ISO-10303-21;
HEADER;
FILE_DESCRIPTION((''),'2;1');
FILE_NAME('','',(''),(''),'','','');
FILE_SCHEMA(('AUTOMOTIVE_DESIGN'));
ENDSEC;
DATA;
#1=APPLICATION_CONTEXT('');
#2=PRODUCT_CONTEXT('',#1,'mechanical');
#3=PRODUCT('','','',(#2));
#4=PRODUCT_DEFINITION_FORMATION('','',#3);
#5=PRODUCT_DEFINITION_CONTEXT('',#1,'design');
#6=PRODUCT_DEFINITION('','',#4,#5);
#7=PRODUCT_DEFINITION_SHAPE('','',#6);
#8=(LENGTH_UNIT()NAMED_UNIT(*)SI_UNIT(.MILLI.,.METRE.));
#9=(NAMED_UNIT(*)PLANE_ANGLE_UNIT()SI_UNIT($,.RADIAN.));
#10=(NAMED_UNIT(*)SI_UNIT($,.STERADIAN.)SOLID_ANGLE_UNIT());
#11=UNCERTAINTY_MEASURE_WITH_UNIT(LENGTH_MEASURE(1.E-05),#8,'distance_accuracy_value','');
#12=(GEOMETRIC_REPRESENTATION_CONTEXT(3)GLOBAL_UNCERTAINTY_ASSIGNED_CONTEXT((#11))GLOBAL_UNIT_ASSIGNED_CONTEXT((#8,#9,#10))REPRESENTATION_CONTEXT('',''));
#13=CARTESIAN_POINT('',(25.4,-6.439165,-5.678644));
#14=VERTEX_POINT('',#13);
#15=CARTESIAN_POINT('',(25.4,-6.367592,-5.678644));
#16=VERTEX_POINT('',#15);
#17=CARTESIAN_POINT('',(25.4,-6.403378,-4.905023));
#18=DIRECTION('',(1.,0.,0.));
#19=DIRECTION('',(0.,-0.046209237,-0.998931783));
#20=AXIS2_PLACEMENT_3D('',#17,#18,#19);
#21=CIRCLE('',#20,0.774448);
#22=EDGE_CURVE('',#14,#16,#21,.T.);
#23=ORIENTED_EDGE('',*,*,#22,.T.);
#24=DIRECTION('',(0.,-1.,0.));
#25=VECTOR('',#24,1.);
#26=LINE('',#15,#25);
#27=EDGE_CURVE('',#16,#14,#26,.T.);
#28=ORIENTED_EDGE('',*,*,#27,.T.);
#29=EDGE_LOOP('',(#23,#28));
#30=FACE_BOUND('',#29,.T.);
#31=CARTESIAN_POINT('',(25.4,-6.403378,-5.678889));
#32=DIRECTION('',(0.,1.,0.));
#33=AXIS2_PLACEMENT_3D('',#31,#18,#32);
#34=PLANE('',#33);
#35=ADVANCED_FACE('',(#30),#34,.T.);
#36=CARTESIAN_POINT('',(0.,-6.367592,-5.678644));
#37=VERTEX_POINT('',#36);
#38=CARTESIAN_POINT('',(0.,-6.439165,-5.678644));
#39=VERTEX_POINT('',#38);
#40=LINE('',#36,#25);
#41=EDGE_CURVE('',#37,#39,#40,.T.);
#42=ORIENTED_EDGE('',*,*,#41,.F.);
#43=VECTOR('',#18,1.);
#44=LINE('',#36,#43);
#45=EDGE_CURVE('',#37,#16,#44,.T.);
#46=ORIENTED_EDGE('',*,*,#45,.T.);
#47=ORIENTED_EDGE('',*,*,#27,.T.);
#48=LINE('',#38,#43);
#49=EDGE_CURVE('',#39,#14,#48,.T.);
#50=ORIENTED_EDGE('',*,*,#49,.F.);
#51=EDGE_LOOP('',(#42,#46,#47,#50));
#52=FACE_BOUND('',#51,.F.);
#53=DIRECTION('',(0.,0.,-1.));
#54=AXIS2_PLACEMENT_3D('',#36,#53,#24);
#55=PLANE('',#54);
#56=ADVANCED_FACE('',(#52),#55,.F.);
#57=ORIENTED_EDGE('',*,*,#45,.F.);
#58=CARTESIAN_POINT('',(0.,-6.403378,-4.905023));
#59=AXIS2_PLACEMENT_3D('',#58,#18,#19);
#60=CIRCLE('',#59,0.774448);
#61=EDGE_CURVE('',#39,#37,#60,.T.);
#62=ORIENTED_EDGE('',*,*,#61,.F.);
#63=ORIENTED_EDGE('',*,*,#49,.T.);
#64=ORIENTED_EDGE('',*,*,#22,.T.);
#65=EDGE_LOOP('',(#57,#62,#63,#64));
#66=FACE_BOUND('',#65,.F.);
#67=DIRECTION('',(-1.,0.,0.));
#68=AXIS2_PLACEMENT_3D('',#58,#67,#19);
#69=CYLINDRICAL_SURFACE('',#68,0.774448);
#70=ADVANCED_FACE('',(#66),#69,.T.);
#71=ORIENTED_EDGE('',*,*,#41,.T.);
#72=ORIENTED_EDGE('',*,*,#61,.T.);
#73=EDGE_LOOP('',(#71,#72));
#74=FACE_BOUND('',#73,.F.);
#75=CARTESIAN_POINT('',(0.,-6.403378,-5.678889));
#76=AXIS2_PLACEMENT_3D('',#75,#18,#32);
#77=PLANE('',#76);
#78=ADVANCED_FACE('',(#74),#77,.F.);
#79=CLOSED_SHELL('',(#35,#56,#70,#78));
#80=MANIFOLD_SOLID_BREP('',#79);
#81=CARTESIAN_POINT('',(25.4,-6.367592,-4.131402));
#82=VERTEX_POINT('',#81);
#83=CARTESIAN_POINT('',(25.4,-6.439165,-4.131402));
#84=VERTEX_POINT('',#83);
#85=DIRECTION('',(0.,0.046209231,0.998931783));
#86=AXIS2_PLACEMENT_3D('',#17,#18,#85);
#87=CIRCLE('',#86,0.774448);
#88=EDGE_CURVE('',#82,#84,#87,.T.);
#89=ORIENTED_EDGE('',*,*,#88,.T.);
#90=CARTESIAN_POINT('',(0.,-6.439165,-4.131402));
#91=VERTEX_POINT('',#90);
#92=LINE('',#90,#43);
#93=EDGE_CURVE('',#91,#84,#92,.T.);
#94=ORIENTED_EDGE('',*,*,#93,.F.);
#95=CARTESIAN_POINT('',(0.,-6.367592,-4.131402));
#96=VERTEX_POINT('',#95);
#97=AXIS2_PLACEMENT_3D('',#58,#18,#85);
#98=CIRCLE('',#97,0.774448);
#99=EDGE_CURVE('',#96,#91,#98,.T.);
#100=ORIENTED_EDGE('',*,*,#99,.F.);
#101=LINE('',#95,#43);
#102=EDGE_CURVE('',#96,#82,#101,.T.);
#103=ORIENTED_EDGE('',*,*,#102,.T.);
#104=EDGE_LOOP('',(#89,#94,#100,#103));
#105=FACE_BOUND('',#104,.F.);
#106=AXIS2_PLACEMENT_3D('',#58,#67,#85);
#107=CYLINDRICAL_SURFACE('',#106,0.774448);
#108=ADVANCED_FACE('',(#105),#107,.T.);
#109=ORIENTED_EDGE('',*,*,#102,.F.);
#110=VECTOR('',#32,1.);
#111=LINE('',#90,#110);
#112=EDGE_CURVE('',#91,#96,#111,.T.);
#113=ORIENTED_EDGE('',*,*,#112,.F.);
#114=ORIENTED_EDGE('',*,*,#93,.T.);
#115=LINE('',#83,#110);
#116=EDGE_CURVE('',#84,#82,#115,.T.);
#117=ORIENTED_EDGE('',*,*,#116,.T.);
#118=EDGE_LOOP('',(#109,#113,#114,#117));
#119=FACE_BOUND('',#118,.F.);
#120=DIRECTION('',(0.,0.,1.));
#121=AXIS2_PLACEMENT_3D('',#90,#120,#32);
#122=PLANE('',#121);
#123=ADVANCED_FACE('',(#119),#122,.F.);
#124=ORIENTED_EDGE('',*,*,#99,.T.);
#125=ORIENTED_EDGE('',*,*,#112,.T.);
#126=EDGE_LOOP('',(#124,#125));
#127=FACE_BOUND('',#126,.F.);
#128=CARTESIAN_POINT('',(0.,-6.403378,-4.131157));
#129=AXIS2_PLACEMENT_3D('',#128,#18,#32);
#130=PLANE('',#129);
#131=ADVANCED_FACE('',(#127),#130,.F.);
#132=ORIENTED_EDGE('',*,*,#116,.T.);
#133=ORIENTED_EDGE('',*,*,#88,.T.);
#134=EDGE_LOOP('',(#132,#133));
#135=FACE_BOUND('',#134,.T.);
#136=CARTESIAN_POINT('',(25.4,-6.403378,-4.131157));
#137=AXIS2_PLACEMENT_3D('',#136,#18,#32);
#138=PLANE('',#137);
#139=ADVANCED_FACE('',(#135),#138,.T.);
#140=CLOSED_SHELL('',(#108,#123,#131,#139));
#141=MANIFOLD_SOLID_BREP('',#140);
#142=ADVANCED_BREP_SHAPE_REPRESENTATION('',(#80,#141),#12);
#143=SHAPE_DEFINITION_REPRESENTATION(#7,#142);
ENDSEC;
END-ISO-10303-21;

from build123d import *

# Parameters (mm, degrees)
F1_DEPTH = 25.4


with BuildPart() as f1:
    # F0 (on Right) → F1 (new body)
    with BuildSketch(Plane.YZ):
        with BuildLine():
            ThreePointArc((-6.367591743, -4.1314020922), (-6.4033784082, -4.1305748132), (-6.4391650735, -4.1314020922))
            Line((-6.4391650735, -4.1314020922), (-6.367591743, -4.1314020922))
        make_face()
    extrude(amount=F1_DEPTH)


with BuildPart() as f1b:
    # F0 (on Right) → F1, piece 2 (new body)
    with BuildSketch(Plane.YZ):
        with BuildLine():
            ThreePointArc((-6.4391650735, -5.6786441784), (-6.4033784082, -5.6794714575), (-6.367591743, -5.6786441784))
            Line((-6.367591743, -5.6786441784), (-6.4391650735, -5.6786441784))
        make_face()
    extrude(amount=F1_DEPTH)


solid = Compound([f1.part, f1b.part])
